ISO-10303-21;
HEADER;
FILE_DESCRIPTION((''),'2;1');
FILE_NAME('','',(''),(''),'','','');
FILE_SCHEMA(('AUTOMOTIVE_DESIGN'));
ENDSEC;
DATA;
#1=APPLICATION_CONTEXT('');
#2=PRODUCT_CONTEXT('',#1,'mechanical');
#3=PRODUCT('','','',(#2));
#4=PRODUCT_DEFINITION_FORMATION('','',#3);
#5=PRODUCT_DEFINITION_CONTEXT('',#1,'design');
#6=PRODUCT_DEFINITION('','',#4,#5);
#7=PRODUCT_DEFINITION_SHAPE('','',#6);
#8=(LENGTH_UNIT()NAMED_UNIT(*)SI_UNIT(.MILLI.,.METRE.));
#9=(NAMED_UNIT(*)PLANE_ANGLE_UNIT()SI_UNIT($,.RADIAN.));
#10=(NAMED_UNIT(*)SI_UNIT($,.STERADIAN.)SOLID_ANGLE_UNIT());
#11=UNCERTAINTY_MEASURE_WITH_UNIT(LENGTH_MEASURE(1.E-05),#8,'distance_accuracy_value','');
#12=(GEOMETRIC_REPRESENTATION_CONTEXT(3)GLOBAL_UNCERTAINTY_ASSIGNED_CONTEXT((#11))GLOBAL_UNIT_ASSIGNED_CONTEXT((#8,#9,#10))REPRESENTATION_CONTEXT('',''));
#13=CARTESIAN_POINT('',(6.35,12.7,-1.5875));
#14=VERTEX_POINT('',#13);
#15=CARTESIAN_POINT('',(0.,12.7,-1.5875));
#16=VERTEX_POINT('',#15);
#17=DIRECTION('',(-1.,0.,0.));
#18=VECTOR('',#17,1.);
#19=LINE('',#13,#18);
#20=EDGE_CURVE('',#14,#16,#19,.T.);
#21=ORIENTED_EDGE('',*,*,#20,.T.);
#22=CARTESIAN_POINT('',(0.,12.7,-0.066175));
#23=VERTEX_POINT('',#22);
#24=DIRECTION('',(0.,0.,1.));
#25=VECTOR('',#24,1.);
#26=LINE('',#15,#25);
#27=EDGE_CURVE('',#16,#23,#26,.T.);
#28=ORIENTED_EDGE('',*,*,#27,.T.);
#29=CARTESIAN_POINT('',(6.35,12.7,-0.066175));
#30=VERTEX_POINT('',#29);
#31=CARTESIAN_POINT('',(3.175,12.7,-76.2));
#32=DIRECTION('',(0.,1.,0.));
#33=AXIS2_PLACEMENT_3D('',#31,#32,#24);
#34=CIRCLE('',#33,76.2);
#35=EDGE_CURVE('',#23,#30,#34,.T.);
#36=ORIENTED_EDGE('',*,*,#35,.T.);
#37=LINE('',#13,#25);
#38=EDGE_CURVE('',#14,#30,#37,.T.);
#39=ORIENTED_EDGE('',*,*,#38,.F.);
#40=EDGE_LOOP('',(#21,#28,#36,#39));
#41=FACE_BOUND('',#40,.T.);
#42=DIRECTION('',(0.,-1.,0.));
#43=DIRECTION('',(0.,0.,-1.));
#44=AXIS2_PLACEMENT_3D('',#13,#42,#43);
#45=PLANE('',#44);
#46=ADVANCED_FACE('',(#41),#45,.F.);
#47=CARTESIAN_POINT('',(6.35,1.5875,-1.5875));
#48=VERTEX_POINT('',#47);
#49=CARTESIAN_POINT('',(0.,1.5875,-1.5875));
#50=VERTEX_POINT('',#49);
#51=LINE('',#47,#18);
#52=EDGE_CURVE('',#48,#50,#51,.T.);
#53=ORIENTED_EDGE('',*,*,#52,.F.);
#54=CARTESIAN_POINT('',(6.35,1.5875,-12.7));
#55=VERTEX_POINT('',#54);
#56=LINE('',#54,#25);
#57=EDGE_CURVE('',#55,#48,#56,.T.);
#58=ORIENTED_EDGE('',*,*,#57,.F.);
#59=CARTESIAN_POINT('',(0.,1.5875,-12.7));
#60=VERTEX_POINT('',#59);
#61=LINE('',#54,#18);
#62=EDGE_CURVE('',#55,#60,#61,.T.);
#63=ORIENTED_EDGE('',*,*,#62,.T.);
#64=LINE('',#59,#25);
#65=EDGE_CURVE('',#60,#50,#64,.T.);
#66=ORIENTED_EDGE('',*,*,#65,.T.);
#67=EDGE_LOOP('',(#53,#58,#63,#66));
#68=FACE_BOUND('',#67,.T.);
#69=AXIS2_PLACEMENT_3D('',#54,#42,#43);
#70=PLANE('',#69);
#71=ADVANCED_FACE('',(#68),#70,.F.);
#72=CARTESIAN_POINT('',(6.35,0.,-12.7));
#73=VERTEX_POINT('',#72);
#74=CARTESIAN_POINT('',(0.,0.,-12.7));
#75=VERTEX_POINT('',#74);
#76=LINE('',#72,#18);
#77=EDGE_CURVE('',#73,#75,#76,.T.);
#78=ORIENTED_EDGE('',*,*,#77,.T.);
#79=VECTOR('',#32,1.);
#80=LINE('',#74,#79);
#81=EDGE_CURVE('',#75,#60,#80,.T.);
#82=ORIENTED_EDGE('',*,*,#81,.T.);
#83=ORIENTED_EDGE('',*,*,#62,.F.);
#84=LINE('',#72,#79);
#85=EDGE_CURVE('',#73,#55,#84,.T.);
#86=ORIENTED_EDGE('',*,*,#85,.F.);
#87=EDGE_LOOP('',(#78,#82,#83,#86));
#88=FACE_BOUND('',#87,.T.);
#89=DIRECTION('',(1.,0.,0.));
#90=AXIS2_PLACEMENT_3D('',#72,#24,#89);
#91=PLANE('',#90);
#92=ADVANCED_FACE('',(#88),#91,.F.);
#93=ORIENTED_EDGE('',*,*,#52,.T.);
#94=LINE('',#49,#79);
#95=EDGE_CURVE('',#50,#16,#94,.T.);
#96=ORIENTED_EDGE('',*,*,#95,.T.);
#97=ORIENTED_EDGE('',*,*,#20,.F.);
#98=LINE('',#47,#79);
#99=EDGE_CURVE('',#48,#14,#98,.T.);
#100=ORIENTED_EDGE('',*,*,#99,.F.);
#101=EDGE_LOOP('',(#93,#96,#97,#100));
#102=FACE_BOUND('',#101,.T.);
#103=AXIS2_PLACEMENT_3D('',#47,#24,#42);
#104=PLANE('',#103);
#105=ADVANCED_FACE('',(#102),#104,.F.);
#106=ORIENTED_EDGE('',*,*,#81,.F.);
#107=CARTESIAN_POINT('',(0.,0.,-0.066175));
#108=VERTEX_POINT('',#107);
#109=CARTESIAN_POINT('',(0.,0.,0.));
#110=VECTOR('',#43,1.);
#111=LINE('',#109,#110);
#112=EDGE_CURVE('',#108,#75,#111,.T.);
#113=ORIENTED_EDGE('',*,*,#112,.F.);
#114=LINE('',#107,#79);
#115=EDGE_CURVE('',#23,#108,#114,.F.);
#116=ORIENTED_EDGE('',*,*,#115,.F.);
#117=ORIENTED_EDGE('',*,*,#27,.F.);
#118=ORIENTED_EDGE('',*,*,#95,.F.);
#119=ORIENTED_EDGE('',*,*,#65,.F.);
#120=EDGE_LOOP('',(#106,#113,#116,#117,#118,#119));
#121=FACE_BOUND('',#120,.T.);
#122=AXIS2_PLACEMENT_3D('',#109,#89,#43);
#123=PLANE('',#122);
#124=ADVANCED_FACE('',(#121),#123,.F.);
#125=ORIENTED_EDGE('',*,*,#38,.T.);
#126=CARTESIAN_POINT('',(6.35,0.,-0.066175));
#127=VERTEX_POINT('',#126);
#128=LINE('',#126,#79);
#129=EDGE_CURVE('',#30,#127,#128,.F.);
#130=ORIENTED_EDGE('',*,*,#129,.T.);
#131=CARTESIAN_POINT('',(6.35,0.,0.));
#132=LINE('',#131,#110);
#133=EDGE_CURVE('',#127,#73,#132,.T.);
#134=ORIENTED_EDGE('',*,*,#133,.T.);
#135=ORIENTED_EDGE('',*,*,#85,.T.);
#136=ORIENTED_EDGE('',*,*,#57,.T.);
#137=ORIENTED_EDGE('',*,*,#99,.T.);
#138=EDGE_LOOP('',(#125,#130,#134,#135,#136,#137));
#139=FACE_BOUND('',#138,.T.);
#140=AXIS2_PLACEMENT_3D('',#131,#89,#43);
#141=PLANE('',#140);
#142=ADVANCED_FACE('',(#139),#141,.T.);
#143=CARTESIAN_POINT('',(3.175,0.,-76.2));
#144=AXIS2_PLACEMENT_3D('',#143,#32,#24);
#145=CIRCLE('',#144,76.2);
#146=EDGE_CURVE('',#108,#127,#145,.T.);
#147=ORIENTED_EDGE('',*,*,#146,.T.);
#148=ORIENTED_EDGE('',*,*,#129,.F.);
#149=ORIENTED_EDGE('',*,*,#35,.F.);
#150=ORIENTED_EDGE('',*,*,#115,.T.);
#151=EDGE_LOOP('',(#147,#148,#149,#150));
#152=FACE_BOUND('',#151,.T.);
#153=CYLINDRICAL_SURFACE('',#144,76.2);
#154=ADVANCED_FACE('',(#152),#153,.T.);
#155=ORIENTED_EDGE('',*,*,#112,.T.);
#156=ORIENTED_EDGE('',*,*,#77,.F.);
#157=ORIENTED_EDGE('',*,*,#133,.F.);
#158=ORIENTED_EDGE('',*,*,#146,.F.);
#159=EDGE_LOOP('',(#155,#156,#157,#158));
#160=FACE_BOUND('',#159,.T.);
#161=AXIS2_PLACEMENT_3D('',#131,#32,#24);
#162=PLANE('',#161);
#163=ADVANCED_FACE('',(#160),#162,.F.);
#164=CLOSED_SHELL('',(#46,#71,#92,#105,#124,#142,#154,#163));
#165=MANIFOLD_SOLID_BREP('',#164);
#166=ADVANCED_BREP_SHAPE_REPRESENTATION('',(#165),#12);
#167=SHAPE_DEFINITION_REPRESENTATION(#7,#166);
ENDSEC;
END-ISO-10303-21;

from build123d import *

# Parameters (mm, degrees)
BOSS_EXTRUDE1_DEPTH = 6.35
CUT_EXTRUDE1_START  = -12.7
CUT_EXTRUDE1_DEPTH  = 12.7


# Read off the part's stored shape, not the designer's step: Cut-Extrude1
with BuildPart() as part:
    # Sketch1 → Boss-Extrude1 (new body)
    with BuildSketch(Plane(origin=(0, 0, 0), x_dir=(0, 0, -1), z_dir=(1, 0, 0))):
        Polygon((0, 0), (12.7, 0), (12.7, 1.5875), (1.5875, 1.5875), (1.5875, 12.7), (0, 12.7), align=None)
    extrude(amount=BOSS_EXTRUDE1_DEPTH)

    # Cut-Extrude1 outline → Cut-Extrude1 (cut)
    with BuildSketch(Plane(origin=(0, 12.7, 0), x_dir=(1, 0, 0), z_dir=(0, 1, 0)).offset(CUT_EXTRUDE1_START)):
        with BuildLine():
            ThreePointArc((6.35, 0.066174567), (4.762844565, 0.016545434), (3.174999586, 0))
            Line((3.174999586, 0), (6.35, 0))
            Line((6.35, 0), (6.35, 0.066174567))
        make_face()
        with BuildLine():
            ThreePointArc((3.174999586, 0), (1.587155022, 0.016545442), (0, 0.066174567))
            Line((0, 0.066174567), (0, 0))
            Line((0, 0), (3.174999586, 0))
        make_face()
    extrude(amount=CUT_EXTRUDE1_DEPTH, mode=Mode.SUBTRACT)


solid = part.part
